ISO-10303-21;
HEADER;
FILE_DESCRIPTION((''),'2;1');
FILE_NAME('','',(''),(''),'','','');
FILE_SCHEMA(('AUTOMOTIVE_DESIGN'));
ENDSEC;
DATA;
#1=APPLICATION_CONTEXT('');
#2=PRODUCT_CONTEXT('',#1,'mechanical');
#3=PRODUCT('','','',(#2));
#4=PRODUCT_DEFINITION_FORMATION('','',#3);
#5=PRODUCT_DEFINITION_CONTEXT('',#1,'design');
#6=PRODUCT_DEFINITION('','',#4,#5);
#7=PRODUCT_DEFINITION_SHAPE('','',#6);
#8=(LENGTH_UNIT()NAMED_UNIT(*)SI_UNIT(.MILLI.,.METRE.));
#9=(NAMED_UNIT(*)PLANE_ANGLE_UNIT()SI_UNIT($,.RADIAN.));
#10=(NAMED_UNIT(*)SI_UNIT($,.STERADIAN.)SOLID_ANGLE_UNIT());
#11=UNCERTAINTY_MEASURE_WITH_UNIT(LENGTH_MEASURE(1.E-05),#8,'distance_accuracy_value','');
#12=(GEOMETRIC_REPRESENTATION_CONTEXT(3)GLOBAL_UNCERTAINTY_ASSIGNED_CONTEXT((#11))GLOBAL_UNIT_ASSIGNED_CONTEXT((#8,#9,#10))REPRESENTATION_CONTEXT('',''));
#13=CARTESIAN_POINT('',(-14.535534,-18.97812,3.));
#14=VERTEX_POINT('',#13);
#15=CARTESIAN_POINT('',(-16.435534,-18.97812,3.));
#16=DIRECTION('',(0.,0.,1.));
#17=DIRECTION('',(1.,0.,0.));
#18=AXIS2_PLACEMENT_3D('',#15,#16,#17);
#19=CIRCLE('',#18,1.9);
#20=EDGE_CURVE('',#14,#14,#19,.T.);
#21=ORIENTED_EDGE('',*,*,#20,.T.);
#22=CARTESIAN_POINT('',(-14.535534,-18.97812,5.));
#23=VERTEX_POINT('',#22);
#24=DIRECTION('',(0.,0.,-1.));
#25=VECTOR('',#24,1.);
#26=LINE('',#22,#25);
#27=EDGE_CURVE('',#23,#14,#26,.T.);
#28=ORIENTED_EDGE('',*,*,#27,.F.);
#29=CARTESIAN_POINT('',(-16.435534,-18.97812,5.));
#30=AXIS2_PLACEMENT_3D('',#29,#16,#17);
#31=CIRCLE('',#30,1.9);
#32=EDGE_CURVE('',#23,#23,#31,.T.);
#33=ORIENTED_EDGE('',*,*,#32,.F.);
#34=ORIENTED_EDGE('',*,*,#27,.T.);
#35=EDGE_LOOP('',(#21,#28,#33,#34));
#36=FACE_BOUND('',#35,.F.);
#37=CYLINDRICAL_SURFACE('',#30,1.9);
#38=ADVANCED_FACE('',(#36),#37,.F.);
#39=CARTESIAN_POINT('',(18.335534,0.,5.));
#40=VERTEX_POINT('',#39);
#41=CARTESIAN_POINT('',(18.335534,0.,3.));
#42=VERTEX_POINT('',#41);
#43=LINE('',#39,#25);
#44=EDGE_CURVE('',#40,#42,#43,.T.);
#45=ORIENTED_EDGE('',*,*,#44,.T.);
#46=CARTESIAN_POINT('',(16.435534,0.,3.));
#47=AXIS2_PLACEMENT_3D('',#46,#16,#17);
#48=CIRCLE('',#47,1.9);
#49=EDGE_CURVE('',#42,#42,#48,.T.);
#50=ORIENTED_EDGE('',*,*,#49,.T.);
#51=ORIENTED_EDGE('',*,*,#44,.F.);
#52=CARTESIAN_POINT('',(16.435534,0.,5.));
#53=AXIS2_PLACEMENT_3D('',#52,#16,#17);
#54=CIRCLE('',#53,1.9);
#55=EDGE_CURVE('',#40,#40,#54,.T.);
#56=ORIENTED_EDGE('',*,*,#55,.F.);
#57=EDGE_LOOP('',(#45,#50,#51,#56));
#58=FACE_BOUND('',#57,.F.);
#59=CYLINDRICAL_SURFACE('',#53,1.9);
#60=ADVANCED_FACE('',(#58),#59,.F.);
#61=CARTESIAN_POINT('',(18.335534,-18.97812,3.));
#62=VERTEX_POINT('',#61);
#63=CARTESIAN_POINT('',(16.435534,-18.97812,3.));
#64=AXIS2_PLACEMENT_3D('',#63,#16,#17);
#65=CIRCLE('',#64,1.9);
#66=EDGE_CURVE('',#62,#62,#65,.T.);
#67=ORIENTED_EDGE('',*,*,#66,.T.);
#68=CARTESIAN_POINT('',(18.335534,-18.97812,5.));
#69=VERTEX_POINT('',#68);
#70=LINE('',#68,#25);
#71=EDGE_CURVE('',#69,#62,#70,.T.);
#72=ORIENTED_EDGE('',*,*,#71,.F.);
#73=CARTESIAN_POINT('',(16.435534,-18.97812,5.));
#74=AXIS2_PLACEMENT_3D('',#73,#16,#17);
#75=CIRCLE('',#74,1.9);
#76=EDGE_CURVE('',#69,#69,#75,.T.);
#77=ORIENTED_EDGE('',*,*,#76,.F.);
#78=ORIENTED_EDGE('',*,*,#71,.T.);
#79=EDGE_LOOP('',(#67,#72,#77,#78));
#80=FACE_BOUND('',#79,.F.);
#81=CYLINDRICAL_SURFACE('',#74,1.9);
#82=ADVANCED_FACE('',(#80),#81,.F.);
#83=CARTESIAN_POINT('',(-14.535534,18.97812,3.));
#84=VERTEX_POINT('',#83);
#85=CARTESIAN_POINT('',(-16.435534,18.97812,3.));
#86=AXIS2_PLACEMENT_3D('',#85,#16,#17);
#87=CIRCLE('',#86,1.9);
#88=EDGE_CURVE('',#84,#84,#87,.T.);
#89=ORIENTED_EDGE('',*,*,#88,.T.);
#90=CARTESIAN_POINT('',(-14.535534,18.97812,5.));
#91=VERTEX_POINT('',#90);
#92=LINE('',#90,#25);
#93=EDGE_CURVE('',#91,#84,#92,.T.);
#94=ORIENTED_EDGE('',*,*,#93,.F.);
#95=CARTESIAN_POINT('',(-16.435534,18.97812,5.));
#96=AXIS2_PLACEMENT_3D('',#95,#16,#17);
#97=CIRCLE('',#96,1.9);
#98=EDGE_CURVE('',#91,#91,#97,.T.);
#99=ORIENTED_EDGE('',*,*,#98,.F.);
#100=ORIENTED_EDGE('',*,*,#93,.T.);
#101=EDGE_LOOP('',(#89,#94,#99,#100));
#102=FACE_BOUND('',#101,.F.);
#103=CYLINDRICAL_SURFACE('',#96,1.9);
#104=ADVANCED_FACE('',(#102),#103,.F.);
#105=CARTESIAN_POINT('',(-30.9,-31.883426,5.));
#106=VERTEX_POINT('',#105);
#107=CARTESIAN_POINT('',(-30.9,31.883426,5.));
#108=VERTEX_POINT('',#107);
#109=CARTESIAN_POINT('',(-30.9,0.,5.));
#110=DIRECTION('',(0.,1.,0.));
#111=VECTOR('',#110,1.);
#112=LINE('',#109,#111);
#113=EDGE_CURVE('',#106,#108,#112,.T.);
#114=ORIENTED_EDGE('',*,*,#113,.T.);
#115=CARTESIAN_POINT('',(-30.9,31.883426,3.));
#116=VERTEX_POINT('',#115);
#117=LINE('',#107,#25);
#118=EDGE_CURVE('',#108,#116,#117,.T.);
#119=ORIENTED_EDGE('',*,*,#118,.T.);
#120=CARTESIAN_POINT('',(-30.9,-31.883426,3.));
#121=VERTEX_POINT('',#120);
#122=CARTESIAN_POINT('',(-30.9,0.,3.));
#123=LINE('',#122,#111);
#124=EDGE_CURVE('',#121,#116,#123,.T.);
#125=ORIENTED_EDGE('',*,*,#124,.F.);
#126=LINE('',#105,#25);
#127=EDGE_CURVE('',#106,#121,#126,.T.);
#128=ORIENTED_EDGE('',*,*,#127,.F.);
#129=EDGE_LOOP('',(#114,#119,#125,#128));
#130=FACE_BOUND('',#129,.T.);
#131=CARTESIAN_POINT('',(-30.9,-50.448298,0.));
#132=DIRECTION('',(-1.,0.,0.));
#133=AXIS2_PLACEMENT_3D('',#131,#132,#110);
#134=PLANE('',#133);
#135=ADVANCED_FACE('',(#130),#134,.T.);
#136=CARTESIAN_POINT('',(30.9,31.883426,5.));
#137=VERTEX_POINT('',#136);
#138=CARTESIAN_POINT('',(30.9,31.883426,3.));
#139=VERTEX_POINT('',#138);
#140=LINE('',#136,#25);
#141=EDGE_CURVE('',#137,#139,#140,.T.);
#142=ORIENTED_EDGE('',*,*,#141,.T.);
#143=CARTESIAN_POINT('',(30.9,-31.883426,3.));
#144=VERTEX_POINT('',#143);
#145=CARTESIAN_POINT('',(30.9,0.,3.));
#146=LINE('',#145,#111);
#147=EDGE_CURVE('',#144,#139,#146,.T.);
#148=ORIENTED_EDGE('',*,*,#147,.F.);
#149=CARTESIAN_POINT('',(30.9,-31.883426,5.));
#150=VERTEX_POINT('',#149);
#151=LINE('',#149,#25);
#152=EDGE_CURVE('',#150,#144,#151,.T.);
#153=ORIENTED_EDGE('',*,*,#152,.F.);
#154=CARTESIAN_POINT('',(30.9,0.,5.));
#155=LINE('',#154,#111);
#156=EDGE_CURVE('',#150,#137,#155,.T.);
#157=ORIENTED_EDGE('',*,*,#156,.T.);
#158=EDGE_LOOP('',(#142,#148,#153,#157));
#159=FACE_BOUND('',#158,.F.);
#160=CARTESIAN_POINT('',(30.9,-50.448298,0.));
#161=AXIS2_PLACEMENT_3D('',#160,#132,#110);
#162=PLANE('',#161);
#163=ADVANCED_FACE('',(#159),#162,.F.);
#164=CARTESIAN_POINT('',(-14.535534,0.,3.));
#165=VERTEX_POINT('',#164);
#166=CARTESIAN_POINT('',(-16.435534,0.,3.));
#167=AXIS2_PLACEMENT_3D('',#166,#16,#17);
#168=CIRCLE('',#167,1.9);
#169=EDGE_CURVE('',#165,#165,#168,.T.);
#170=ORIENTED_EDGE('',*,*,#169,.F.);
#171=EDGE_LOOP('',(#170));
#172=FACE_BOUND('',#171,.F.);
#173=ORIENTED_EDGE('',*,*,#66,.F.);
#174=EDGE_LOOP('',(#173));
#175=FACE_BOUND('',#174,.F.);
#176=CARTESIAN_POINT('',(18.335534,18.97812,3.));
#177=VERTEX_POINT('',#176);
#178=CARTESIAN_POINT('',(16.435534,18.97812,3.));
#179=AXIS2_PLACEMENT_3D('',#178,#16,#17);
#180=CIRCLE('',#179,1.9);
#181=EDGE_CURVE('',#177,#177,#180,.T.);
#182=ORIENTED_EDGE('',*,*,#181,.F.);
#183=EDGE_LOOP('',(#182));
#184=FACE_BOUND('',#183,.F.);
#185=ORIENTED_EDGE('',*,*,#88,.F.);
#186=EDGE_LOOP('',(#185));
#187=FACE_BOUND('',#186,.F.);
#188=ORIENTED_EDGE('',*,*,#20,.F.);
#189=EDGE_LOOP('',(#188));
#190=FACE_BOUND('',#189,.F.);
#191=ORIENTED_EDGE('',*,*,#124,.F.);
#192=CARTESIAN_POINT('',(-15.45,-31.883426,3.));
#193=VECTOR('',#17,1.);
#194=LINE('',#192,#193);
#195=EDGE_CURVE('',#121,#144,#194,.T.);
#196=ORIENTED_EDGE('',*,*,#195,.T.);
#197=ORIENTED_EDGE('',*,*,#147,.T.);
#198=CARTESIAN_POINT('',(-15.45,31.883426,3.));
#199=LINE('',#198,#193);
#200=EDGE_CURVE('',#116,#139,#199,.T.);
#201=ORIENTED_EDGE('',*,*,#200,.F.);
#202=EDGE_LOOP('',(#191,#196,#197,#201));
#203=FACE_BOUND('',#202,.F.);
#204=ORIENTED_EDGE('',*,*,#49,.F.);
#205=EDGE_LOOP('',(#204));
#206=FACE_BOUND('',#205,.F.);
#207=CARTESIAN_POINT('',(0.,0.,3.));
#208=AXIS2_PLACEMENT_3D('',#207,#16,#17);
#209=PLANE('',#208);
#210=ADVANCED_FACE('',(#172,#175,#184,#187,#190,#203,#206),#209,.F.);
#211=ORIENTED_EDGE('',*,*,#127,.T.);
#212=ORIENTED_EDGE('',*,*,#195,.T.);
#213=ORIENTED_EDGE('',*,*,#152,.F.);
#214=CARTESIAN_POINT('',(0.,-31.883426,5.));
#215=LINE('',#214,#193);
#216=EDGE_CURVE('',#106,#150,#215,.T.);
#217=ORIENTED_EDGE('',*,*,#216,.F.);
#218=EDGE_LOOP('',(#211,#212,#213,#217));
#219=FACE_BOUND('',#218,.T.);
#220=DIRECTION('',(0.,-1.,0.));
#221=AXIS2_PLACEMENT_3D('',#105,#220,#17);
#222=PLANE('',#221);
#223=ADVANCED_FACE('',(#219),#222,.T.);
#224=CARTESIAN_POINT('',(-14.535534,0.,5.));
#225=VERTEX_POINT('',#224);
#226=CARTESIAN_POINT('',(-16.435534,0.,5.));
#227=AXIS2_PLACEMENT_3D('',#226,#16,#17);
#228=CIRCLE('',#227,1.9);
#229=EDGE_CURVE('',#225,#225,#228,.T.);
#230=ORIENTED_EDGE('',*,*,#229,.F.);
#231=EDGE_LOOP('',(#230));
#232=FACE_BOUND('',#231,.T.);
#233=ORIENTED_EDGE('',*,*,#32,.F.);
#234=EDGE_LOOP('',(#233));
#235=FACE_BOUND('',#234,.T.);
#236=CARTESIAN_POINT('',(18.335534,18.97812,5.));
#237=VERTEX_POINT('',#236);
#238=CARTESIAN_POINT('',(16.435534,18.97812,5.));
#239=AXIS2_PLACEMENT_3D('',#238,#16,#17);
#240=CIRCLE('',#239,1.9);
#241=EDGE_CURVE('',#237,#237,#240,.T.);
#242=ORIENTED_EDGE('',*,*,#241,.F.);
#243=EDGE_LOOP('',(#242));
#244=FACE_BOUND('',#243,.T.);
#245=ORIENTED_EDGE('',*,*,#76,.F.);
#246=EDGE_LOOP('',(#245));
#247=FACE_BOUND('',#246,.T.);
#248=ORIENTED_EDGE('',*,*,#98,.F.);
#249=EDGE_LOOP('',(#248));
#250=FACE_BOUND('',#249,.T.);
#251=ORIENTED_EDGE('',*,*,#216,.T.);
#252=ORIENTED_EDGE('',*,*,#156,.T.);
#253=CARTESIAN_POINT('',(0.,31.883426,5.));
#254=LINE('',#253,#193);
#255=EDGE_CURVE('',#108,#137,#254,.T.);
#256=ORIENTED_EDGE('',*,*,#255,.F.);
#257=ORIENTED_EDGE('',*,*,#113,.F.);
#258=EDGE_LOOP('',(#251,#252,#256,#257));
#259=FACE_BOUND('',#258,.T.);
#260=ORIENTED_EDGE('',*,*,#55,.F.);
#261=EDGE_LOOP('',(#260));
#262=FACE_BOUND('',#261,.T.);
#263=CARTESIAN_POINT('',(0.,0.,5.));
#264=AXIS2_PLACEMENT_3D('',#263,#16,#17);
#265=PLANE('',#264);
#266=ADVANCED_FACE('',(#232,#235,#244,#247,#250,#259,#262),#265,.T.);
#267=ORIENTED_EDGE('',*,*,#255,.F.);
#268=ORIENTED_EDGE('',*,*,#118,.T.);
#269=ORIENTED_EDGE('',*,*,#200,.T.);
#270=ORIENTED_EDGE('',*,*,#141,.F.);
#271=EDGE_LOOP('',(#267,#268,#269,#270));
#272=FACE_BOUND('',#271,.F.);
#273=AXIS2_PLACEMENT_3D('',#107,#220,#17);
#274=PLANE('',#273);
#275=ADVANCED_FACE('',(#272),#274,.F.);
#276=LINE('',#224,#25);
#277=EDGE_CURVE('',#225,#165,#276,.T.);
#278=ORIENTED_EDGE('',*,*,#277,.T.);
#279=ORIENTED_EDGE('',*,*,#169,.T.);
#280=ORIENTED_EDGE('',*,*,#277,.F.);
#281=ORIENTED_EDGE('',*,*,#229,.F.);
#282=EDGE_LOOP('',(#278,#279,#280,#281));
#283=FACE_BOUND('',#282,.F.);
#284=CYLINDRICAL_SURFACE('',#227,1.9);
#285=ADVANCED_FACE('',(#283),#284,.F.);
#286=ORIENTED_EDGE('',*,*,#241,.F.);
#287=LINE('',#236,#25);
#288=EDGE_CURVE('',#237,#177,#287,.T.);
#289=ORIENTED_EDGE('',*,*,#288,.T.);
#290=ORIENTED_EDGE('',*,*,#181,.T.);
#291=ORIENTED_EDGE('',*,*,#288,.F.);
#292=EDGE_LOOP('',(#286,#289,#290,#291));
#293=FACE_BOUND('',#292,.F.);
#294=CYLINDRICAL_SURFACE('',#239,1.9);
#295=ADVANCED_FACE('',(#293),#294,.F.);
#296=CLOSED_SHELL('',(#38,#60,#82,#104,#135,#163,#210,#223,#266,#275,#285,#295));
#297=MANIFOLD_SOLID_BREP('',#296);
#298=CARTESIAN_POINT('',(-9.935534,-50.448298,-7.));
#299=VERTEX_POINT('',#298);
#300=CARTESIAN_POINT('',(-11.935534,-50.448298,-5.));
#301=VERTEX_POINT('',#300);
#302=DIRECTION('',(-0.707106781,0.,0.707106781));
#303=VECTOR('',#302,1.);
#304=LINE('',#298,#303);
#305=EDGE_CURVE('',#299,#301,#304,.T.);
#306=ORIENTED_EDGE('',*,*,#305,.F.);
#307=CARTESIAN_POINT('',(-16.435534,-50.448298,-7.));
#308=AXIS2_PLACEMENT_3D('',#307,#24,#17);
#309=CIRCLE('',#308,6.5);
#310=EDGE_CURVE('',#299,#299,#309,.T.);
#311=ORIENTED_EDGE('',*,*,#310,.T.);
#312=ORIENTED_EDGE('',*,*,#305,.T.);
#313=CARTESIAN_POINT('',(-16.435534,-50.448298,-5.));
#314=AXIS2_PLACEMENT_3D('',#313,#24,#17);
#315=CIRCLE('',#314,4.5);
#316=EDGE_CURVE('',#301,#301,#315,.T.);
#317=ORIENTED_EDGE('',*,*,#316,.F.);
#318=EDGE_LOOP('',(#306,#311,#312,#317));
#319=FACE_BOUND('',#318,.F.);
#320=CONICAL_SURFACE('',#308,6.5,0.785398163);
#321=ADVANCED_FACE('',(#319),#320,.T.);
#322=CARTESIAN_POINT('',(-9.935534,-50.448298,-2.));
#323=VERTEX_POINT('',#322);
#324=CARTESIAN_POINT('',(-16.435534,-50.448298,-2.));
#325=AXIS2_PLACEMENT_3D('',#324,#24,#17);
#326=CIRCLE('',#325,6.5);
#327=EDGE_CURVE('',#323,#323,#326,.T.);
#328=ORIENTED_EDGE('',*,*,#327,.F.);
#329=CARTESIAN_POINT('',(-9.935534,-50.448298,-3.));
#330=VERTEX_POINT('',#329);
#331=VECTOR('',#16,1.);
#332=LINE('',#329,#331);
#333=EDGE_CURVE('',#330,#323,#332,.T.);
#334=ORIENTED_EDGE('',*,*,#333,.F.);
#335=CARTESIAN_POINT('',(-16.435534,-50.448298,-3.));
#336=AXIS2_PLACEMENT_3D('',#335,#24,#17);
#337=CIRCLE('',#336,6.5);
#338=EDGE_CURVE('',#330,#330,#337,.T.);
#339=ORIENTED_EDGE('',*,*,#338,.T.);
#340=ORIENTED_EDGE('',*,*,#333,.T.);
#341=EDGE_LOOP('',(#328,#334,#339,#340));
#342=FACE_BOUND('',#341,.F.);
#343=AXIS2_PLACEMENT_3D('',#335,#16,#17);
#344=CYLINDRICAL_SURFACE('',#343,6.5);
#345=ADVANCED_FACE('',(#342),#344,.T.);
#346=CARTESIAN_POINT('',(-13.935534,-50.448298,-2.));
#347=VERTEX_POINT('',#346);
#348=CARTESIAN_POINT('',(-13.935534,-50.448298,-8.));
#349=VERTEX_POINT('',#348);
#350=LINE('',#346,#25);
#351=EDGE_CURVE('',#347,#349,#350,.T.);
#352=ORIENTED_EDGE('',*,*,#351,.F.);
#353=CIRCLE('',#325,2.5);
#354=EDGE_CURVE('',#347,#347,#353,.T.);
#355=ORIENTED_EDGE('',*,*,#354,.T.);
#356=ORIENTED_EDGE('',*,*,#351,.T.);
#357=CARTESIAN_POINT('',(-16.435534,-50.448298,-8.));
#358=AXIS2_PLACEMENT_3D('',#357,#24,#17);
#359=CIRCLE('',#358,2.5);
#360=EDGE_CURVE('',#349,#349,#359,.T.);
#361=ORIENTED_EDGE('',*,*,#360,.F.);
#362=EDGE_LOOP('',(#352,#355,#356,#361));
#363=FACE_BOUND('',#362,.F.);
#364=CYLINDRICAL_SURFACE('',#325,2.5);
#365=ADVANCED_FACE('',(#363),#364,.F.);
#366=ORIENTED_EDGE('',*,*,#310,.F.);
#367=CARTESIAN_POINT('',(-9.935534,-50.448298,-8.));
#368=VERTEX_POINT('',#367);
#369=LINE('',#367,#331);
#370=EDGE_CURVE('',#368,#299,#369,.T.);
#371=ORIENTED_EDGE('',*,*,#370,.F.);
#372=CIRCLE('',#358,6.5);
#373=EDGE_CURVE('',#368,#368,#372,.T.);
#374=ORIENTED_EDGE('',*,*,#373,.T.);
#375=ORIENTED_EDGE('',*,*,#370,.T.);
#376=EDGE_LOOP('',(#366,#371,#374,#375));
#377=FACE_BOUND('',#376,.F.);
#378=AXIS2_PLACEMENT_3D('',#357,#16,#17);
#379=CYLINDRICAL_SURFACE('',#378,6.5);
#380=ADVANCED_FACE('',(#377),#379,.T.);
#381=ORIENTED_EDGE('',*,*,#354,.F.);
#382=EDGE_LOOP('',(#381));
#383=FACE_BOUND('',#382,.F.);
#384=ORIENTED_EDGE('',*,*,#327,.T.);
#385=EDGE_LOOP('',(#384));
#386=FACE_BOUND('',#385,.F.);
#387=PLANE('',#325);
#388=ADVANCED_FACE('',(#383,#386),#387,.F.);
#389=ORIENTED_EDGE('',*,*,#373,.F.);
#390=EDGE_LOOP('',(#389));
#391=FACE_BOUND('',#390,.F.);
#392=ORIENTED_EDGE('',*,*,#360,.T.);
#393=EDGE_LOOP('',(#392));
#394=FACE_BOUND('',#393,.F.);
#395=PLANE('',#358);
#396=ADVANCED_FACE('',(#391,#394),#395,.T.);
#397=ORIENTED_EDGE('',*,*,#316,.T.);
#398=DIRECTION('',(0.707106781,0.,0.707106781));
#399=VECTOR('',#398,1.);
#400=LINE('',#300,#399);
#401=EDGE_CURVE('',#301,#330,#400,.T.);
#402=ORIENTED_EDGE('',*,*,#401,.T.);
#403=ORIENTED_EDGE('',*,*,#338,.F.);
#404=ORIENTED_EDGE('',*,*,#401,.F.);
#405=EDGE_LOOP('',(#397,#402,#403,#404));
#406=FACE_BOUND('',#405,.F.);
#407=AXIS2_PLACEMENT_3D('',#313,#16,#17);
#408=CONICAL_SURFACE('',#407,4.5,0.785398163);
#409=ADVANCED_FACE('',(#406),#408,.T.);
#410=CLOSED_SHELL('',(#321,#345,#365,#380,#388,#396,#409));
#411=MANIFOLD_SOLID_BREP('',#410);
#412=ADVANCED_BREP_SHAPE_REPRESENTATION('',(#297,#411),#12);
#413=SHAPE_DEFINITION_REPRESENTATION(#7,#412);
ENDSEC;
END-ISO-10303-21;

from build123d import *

# Parameters (mm, degrees)
F0_W     = 61.8
F0_H     = 100.8965958967
F1_DEPTH = 5
F4_R     = 1.9
F4_W     = 61.8
F4_H     = 18.5648719378
F5_DEPTH = 25
F7_DEPTH = 3


with BuildPart() as f1:
    # F0 (on Top) → F1 (new body)
    with BuildSketch(Plane.XY):
        Rectangle(F0_W, F0_H)
    extrude(amount=F1_DEPTH)

    # F4 (on face) → F5 (cut)
    with BuildSketch(Plane.XY.offset(5)):
        with Locations((-16.4355339059, 0)):
            Circle(F4_R)
        with Locations((-16.4355339059, -18.9781198497)):
            Circle(F4_R)
        with Locations((16.4355339059, 18.9781198497)):
            Circle(F4_R)
        with Locations((16.4355339059, 0)):
            Circle(F4_R)
        with Locations((16.4355339059, -18.9781198497)):
            Circle(F4_R)
        with Locations((-16.4355339059, 18.9781198497)):
            Circle(F4_R)
        with Locations((0, 41.1658619795)):
            Rectangle(F4_W, F4_H)
        with Locations((0, -41.1658619795)):
            Rectangle(F4_W, F4_H)
    extrude(amount=-F5_DEPTH, mode=Mode.SUBTRACT)

    # F7 (cut): a face of the model
    f7_faces = [f1.faces().sort_by_distance(p)[0] for p in [
        (0, 0, 0),
    ]]
    extrude(f7_faces, amount=-F7_DEPTH, mode=Mode.SUBTRACT)


with BuildPart() as f3:
    # F2 (on face) → F3 (revolve)
    with BuildSketch(Plane.XZ.offset(50.4482979484)):
        Polygon((-9.9355339059, -2), (-13.9355339059, -2), (-13.9355339059, -8), (-9.9355339059, -8), (-9.9355339059, -7), (-11.9355339059, -5), (-9.9355339059, -3), align=None)
    revolve(axis=Axis((-16.4355339059, -50.4482979484, -5), (0, 0, -1)))


solid = Compound([f1.part, f3.part])
